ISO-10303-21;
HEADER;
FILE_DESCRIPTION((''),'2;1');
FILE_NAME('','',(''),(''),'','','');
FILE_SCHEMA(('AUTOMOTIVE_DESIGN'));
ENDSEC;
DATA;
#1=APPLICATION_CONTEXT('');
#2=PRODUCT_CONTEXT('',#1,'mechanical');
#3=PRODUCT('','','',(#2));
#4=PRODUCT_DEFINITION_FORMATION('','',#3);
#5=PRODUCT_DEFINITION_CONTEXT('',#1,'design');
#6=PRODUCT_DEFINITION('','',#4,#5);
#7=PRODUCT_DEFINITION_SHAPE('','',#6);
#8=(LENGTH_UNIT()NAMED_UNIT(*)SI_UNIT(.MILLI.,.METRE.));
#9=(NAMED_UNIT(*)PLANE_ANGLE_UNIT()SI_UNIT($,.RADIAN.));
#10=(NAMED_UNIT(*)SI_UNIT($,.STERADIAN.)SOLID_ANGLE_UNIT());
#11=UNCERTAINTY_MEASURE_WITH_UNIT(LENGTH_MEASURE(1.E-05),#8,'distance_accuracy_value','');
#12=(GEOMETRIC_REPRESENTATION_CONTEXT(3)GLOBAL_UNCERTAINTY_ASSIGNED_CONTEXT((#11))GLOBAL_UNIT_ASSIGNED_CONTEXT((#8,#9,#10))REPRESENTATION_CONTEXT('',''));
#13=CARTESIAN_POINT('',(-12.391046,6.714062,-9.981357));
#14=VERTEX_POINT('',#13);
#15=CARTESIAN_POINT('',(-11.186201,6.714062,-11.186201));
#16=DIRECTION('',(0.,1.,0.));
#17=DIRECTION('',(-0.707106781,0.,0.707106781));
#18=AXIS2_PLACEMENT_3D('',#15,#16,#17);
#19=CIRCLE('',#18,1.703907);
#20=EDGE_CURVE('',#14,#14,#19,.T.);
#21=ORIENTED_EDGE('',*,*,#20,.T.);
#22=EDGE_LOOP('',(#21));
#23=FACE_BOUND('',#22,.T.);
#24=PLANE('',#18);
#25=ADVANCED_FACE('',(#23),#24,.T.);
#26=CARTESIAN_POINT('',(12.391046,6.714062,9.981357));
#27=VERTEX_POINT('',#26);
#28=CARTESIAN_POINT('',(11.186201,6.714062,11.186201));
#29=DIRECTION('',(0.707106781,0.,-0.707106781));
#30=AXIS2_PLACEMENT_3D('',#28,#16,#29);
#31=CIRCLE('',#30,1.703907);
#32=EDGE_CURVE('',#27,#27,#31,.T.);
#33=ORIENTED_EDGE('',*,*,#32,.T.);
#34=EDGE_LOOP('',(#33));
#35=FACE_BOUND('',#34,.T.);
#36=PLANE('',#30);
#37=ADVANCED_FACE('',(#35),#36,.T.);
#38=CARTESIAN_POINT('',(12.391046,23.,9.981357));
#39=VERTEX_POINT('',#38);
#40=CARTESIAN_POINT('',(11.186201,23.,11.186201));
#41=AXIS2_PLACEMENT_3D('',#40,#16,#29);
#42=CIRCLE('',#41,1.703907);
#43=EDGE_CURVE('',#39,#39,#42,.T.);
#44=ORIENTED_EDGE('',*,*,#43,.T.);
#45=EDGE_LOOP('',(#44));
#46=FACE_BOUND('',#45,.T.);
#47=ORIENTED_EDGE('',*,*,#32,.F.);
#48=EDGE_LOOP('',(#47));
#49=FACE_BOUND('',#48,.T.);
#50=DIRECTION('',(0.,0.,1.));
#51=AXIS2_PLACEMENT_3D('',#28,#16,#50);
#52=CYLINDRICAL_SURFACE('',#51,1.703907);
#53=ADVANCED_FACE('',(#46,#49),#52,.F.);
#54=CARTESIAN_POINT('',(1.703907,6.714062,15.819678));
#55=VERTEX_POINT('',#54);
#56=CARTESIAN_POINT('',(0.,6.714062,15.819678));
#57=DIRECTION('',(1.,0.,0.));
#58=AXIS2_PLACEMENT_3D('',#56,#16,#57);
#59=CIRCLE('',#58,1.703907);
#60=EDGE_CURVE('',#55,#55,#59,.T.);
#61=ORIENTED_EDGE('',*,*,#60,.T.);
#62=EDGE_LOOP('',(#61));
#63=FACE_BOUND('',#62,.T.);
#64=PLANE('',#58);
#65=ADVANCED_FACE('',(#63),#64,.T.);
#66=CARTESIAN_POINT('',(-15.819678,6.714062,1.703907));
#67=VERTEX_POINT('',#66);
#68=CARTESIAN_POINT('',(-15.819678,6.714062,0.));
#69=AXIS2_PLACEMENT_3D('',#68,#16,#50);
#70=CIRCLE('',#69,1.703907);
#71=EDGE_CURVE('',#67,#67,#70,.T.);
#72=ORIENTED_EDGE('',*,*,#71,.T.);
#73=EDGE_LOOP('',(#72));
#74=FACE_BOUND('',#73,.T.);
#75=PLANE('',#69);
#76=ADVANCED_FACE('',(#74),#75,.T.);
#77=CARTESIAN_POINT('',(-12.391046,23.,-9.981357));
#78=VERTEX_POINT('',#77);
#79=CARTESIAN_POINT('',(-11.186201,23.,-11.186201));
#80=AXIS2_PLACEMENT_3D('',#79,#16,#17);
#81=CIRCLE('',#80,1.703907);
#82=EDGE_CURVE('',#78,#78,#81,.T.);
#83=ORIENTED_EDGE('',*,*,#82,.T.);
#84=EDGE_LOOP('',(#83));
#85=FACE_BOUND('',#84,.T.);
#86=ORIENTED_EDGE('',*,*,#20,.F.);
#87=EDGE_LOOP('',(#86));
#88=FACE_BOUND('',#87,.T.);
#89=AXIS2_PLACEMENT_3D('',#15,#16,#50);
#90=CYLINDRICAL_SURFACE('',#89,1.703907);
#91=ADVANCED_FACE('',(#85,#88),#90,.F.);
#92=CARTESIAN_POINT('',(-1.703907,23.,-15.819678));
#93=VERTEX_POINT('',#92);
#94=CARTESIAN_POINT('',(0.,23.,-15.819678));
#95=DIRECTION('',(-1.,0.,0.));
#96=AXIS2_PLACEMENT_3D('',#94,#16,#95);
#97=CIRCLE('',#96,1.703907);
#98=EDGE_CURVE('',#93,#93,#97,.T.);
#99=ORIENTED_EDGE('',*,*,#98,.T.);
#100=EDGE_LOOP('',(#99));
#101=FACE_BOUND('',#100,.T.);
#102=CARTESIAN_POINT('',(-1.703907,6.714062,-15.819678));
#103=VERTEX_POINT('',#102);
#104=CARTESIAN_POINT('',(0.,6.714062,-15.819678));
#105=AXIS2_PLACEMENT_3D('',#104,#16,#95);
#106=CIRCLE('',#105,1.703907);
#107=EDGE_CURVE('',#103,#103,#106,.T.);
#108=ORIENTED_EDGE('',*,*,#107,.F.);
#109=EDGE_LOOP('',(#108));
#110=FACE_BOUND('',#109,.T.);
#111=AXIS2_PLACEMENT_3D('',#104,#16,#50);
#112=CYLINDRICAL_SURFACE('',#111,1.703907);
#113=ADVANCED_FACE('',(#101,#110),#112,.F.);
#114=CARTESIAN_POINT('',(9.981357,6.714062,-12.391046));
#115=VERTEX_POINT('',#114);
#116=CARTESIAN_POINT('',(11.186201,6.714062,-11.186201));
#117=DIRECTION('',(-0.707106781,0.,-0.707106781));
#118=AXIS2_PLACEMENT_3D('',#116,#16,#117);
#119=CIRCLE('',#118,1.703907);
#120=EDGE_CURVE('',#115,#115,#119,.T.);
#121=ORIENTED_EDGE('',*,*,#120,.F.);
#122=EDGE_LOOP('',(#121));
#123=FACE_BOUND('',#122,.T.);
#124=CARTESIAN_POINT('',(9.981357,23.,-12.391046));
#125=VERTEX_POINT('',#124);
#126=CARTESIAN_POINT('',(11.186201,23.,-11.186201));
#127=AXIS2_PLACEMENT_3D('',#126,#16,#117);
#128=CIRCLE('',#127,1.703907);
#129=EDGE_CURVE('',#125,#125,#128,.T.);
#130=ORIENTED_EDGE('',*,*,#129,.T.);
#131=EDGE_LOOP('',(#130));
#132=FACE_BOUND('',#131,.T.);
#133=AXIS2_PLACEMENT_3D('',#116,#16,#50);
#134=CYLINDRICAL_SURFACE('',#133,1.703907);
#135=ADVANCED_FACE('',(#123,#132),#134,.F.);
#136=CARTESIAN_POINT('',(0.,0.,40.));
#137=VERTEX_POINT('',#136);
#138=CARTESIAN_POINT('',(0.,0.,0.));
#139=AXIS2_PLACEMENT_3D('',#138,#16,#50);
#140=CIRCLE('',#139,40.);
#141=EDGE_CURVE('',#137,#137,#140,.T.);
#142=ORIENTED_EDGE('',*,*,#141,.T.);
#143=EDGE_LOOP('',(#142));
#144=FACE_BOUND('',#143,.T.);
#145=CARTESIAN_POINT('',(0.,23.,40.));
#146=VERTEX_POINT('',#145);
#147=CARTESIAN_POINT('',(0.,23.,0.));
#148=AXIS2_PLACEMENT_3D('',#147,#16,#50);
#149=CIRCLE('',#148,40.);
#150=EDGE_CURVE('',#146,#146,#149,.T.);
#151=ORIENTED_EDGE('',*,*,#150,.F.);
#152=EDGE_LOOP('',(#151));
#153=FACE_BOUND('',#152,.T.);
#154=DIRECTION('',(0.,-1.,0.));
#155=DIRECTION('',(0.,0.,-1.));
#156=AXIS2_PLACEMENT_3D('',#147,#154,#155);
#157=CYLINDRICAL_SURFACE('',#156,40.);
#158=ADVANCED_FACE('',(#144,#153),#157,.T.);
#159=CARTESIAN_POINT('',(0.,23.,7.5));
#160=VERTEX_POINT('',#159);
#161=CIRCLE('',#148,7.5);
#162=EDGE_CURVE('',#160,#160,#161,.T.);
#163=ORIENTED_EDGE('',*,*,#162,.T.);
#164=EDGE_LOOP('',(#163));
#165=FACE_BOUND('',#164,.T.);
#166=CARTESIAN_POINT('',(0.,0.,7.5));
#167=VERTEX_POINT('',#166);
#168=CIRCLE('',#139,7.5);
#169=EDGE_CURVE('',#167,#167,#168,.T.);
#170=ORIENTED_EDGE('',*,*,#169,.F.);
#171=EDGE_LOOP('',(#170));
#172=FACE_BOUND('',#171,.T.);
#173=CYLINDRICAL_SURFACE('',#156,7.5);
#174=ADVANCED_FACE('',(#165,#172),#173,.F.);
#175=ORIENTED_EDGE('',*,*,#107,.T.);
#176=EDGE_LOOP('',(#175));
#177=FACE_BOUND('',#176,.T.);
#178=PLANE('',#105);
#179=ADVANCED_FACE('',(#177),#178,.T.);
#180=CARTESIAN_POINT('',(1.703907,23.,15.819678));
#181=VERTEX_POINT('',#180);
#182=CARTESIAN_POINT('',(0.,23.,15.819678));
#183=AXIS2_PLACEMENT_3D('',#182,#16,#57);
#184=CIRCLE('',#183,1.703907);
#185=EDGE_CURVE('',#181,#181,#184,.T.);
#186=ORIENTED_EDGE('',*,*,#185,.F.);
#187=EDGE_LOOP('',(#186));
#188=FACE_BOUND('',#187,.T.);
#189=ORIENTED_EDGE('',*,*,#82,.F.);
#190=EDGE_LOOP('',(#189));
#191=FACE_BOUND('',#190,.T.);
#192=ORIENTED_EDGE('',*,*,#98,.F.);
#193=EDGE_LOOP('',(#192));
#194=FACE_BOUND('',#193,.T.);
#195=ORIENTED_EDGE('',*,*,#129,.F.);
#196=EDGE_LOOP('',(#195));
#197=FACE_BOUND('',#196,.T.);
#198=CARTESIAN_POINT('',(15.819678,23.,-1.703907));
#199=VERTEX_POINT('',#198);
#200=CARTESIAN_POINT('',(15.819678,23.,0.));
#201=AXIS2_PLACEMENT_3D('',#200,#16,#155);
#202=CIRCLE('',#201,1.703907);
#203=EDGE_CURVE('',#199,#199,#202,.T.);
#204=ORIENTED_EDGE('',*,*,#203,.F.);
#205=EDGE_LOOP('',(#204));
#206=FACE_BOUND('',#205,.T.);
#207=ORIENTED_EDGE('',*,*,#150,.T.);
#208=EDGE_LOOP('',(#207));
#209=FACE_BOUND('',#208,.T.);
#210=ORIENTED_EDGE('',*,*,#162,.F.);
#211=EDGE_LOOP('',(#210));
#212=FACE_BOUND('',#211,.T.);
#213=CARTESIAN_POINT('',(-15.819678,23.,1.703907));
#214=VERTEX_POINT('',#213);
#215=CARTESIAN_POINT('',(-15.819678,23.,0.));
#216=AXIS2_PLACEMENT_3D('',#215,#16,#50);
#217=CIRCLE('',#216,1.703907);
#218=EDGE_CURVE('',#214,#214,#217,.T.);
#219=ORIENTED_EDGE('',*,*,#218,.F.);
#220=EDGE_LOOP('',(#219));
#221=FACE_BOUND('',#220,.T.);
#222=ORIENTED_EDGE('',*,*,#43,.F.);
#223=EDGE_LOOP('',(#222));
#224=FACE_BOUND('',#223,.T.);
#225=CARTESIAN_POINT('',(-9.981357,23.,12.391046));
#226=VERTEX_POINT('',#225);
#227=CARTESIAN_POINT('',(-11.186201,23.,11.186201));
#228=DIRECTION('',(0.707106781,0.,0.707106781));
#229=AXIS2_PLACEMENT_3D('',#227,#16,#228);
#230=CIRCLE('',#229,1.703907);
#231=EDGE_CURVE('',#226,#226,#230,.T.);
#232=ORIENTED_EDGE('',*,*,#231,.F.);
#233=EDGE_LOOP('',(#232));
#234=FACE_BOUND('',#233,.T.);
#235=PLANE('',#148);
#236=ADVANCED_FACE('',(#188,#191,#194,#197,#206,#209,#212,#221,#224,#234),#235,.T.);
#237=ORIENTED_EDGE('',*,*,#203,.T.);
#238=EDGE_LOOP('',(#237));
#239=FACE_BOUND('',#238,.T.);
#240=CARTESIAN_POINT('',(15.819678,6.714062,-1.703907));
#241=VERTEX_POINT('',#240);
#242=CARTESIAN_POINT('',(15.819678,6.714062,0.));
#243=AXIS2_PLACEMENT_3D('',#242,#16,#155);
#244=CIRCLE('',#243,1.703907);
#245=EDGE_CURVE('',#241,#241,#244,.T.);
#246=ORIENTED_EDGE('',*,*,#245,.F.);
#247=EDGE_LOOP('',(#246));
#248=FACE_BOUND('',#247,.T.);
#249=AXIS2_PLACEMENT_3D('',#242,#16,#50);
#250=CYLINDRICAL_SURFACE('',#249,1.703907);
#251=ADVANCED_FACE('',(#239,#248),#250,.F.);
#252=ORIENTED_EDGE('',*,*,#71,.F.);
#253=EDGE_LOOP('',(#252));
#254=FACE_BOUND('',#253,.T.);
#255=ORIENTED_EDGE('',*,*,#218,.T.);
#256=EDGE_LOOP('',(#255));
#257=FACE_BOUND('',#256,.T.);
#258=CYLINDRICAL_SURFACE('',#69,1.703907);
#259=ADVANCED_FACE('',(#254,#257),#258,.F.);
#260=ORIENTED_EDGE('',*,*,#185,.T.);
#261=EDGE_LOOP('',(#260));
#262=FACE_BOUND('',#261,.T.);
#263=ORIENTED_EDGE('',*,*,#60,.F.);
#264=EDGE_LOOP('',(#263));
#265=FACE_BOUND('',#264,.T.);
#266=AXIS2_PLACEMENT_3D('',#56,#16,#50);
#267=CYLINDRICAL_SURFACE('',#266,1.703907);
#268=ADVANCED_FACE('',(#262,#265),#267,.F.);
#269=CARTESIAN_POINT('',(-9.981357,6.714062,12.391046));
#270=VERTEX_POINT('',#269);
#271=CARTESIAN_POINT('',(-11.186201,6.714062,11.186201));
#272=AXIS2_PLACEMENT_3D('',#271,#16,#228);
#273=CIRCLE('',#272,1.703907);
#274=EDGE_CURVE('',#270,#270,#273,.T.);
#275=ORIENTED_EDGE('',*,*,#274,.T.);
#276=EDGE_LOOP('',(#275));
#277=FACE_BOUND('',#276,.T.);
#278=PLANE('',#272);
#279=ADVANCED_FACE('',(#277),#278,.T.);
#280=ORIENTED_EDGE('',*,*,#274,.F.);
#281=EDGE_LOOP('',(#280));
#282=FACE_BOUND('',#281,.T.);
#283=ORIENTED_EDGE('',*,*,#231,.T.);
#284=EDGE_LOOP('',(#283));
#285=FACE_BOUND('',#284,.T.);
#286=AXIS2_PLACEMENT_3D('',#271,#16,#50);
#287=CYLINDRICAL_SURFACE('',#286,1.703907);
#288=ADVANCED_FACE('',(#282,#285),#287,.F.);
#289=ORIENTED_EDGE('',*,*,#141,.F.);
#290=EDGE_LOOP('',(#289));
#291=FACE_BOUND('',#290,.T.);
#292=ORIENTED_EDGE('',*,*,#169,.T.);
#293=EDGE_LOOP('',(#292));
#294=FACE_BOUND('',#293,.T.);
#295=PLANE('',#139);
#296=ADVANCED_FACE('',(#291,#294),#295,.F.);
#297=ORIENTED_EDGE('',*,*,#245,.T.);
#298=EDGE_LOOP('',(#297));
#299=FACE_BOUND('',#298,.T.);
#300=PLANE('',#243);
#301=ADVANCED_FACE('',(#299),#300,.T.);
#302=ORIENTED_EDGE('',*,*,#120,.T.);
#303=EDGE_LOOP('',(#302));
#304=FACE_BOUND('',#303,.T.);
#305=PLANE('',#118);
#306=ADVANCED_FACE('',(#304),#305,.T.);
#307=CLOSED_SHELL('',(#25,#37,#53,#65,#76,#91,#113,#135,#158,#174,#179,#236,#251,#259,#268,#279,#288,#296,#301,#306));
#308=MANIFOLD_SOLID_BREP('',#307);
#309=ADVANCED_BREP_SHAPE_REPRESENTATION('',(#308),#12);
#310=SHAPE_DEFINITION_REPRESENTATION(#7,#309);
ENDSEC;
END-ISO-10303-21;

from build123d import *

# Parameters (mm, degrees)
SKETCH1_R           = 40
BOSS_EXTRUDE1_DEPTH = 23
SKETCH2_R           = 7.5
CUT_EXTRUDE1_DEPTH  = 62.065538563
SKETCH3_R           = 1.703907344
CUT_EXTRUDE2_DEPTH  = 16.285937871
CIRPATTERN1_COUNT   = 8


with BuildPart() as part:
    # Sketch1 → Boss-Extrude1 (new body)
    with BuildSketch(Plane(origin=(0, 0, 0), x_dir=(1, 0, 0), z_dir=(0, 1, 0))):
        Circle(SKETCH1_R)
    extrude(amount=BOSS_EXTRUDE1_DEPTH)

    # Sketch2 → Cut-Extrude1 (cut, through all)
    with BuildSketch(Plane(origin=(0, 0, 0), x_dir=(1, 0, 0), z_dir=(0, 1, 0))):
        Circle(SKETCH2_R)
    extrude(amount=CUT_EXTRUDE1_DEPTH, mode=Mode.SUBTRACT)

    # Sketch3 → Cut-Extrude2 (cut)
    with BuildSketch(Plane(origin=(0, 23, 0), x_dir=(1, 0, 0), z_dir=(0, 1, 0))):
        with Locations((-15.819677752, 0)):
            Circle(SKETCH3_R)
    cut_extrude2 = extrude(amount=-CUT_EXTRUDE2_DEPTH, mode=Mode.SUBTRACT)

    # CirPattern1: Cut-Extrude2 ×8 about axis
    cirpattern1_axis = Axis((0, 0, 0), (0, 1, 0))
    for i in range(1, CIRPATTERN1_COUNT):
        add(cut_extrude2.rotate(cirpattern1_axis, i * 360 / CIRPATTERN1_COUNT), mode=Mode.SUBTRACT)


solid = part.part
